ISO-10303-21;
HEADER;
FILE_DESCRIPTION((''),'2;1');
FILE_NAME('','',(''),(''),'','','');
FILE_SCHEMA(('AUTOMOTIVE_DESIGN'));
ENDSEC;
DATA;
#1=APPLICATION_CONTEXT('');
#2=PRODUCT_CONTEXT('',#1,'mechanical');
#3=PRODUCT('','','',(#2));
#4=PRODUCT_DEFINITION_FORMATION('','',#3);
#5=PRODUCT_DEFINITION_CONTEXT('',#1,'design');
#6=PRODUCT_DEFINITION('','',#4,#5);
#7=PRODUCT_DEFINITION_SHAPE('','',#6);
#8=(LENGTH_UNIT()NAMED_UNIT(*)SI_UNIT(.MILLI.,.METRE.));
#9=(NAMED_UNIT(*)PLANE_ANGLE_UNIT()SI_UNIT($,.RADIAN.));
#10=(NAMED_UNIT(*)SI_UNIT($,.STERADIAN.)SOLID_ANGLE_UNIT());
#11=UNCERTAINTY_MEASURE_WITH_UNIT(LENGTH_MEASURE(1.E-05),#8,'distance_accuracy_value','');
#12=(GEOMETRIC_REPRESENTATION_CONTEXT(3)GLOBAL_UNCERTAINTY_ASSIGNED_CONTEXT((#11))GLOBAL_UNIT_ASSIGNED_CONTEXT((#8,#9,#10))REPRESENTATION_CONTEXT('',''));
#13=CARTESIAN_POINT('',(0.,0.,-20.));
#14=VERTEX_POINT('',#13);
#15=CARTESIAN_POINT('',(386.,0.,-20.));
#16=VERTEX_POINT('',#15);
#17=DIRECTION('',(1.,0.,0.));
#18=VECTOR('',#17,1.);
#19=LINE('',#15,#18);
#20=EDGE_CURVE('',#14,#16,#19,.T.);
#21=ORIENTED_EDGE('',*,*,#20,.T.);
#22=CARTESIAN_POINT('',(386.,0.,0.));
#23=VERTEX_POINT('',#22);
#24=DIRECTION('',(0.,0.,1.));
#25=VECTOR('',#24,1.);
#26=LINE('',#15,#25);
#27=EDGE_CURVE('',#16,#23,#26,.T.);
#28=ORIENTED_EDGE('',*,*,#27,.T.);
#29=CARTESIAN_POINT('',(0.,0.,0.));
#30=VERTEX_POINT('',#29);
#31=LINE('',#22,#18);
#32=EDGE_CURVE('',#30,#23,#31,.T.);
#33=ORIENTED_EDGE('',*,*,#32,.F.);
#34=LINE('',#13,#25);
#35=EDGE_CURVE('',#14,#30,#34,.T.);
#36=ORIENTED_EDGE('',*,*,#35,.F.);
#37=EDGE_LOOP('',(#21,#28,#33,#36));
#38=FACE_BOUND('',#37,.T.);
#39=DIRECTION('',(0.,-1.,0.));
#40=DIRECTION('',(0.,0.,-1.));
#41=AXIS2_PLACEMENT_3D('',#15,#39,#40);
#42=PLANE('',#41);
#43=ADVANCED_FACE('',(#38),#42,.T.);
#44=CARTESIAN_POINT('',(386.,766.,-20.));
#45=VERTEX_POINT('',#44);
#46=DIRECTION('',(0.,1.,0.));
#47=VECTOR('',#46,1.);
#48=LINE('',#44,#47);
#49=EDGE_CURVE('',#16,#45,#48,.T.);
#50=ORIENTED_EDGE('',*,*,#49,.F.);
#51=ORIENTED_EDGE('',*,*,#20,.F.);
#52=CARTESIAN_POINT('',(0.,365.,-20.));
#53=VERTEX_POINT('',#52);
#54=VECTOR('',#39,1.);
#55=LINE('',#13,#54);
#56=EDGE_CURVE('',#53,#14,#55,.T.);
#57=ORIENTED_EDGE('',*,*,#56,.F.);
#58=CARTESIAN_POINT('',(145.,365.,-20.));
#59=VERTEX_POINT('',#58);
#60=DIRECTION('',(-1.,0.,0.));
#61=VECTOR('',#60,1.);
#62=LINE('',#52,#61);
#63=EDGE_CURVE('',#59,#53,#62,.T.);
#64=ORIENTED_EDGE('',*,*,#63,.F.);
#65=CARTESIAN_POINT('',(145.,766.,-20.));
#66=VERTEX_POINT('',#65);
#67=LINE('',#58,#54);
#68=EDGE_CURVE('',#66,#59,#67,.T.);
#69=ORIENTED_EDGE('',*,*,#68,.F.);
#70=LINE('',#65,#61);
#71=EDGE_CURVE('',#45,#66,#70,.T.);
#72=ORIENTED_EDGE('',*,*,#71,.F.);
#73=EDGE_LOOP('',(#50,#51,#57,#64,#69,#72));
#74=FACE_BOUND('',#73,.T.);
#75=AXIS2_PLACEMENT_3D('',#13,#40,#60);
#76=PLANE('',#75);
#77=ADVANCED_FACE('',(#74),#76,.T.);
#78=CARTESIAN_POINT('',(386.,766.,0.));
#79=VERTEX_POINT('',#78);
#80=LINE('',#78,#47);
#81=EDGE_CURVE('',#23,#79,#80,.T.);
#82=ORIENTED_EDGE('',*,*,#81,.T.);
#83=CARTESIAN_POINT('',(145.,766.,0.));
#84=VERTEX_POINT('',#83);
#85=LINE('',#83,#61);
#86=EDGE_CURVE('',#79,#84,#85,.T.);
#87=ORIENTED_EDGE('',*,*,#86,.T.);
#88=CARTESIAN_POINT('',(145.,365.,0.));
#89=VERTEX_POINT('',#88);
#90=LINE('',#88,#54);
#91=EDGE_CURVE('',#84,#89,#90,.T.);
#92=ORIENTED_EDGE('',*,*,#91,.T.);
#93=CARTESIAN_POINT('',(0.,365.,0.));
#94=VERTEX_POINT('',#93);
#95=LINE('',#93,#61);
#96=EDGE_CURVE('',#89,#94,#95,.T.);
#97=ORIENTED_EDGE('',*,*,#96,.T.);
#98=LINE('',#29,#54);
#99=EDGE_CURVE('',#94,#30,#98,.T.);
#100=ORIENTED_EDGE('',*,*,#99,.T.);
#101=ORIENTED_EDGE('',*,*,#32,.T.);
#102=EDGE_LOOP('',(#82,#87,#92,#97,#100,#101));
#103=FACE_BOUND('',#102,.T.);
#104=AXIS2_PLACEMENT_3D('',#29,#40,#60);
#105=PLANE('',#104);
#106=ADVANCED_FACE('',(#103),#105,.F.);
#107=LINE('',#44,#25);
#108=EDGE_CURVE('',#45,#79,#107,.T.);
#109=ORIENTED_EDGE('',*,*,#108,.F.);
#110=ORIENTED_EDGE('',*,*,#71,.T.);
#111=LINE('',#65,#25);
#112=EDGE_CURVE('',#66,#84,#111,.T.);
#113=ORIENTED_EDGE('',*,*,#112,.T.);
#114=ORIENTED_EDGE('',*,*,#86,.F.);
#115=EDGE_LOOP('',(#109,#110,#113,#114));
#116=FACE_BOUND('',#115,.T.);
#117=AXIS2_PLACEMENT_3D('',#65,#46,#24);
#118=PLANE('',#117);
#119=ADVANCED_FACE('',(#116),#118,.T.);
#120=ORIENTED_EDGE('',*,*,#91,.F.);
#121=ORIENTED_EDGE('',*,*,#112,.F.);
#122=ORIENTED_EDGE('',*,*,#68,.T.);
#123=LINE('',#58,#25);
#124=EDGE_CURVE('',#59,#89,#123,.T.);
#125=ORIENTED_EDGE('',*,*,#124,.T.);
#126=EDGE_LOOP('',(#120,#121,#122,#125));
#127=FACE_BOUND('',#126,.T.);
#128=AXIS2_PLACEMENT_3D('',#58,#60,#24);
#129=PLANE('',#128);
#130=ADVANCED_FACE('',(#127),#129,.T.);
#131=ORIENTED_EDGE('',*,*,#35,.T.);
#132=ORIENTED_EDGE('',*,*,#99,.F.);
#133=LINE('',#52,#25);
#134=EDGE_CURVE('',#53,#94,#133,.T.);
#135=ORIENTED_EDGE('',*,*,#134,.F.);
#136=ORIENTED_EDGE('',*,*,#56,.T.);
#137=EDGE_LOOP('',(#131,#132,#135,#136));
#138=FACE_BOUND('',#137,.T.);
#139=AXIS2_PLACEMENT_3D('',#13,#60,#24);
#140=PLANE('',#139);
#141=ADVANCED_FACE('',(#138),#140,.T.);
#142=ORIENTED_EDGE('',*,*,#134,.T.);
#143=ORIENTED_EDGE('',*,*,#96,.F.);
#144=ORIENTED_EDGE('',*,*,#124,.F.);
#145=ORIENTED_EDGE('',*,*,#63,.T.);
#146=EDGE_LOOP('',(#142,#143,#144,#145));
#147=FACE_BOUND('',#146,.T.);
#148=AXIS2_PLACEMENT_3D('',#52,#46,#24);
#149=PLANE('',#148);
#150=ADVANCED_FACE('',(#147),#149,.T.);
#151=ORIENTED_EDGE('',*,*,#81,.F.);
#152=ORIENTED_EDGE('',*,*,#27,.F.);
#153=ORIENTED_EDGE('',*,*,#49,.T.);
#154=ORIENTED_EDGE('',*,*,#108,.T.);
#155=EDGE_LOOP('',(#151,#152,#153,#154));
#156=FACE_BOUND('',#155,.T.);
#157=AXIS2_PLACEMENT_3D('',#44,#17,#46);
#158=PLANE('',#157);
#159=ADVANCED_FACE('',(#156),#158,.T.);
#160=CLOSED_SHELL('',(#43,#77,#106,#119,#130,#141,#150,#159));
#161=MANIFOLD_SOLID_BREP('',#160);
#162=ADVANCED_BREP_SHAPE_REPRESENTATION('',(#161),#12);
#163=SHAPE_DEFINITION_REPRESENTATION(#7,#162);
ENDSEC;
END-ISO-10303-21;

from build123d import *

# Parameters (mm, degrees)
TABAN_FLAN_1_DEPTH = 20


# Sheet-metal steps are written as plain solids
with BuildPart() as part:
    # Çizim1 → Taban-Flanş1 (new body)
    with BuildSketch(Plane.XY):
        Polygon((0, 0), (0, 365), (145, 365), (145, 766), (386, 766), (386, 0), align=None)
    extrude(amount=-TABAN_FLAN_1_DEPTH)


solid = part.part
